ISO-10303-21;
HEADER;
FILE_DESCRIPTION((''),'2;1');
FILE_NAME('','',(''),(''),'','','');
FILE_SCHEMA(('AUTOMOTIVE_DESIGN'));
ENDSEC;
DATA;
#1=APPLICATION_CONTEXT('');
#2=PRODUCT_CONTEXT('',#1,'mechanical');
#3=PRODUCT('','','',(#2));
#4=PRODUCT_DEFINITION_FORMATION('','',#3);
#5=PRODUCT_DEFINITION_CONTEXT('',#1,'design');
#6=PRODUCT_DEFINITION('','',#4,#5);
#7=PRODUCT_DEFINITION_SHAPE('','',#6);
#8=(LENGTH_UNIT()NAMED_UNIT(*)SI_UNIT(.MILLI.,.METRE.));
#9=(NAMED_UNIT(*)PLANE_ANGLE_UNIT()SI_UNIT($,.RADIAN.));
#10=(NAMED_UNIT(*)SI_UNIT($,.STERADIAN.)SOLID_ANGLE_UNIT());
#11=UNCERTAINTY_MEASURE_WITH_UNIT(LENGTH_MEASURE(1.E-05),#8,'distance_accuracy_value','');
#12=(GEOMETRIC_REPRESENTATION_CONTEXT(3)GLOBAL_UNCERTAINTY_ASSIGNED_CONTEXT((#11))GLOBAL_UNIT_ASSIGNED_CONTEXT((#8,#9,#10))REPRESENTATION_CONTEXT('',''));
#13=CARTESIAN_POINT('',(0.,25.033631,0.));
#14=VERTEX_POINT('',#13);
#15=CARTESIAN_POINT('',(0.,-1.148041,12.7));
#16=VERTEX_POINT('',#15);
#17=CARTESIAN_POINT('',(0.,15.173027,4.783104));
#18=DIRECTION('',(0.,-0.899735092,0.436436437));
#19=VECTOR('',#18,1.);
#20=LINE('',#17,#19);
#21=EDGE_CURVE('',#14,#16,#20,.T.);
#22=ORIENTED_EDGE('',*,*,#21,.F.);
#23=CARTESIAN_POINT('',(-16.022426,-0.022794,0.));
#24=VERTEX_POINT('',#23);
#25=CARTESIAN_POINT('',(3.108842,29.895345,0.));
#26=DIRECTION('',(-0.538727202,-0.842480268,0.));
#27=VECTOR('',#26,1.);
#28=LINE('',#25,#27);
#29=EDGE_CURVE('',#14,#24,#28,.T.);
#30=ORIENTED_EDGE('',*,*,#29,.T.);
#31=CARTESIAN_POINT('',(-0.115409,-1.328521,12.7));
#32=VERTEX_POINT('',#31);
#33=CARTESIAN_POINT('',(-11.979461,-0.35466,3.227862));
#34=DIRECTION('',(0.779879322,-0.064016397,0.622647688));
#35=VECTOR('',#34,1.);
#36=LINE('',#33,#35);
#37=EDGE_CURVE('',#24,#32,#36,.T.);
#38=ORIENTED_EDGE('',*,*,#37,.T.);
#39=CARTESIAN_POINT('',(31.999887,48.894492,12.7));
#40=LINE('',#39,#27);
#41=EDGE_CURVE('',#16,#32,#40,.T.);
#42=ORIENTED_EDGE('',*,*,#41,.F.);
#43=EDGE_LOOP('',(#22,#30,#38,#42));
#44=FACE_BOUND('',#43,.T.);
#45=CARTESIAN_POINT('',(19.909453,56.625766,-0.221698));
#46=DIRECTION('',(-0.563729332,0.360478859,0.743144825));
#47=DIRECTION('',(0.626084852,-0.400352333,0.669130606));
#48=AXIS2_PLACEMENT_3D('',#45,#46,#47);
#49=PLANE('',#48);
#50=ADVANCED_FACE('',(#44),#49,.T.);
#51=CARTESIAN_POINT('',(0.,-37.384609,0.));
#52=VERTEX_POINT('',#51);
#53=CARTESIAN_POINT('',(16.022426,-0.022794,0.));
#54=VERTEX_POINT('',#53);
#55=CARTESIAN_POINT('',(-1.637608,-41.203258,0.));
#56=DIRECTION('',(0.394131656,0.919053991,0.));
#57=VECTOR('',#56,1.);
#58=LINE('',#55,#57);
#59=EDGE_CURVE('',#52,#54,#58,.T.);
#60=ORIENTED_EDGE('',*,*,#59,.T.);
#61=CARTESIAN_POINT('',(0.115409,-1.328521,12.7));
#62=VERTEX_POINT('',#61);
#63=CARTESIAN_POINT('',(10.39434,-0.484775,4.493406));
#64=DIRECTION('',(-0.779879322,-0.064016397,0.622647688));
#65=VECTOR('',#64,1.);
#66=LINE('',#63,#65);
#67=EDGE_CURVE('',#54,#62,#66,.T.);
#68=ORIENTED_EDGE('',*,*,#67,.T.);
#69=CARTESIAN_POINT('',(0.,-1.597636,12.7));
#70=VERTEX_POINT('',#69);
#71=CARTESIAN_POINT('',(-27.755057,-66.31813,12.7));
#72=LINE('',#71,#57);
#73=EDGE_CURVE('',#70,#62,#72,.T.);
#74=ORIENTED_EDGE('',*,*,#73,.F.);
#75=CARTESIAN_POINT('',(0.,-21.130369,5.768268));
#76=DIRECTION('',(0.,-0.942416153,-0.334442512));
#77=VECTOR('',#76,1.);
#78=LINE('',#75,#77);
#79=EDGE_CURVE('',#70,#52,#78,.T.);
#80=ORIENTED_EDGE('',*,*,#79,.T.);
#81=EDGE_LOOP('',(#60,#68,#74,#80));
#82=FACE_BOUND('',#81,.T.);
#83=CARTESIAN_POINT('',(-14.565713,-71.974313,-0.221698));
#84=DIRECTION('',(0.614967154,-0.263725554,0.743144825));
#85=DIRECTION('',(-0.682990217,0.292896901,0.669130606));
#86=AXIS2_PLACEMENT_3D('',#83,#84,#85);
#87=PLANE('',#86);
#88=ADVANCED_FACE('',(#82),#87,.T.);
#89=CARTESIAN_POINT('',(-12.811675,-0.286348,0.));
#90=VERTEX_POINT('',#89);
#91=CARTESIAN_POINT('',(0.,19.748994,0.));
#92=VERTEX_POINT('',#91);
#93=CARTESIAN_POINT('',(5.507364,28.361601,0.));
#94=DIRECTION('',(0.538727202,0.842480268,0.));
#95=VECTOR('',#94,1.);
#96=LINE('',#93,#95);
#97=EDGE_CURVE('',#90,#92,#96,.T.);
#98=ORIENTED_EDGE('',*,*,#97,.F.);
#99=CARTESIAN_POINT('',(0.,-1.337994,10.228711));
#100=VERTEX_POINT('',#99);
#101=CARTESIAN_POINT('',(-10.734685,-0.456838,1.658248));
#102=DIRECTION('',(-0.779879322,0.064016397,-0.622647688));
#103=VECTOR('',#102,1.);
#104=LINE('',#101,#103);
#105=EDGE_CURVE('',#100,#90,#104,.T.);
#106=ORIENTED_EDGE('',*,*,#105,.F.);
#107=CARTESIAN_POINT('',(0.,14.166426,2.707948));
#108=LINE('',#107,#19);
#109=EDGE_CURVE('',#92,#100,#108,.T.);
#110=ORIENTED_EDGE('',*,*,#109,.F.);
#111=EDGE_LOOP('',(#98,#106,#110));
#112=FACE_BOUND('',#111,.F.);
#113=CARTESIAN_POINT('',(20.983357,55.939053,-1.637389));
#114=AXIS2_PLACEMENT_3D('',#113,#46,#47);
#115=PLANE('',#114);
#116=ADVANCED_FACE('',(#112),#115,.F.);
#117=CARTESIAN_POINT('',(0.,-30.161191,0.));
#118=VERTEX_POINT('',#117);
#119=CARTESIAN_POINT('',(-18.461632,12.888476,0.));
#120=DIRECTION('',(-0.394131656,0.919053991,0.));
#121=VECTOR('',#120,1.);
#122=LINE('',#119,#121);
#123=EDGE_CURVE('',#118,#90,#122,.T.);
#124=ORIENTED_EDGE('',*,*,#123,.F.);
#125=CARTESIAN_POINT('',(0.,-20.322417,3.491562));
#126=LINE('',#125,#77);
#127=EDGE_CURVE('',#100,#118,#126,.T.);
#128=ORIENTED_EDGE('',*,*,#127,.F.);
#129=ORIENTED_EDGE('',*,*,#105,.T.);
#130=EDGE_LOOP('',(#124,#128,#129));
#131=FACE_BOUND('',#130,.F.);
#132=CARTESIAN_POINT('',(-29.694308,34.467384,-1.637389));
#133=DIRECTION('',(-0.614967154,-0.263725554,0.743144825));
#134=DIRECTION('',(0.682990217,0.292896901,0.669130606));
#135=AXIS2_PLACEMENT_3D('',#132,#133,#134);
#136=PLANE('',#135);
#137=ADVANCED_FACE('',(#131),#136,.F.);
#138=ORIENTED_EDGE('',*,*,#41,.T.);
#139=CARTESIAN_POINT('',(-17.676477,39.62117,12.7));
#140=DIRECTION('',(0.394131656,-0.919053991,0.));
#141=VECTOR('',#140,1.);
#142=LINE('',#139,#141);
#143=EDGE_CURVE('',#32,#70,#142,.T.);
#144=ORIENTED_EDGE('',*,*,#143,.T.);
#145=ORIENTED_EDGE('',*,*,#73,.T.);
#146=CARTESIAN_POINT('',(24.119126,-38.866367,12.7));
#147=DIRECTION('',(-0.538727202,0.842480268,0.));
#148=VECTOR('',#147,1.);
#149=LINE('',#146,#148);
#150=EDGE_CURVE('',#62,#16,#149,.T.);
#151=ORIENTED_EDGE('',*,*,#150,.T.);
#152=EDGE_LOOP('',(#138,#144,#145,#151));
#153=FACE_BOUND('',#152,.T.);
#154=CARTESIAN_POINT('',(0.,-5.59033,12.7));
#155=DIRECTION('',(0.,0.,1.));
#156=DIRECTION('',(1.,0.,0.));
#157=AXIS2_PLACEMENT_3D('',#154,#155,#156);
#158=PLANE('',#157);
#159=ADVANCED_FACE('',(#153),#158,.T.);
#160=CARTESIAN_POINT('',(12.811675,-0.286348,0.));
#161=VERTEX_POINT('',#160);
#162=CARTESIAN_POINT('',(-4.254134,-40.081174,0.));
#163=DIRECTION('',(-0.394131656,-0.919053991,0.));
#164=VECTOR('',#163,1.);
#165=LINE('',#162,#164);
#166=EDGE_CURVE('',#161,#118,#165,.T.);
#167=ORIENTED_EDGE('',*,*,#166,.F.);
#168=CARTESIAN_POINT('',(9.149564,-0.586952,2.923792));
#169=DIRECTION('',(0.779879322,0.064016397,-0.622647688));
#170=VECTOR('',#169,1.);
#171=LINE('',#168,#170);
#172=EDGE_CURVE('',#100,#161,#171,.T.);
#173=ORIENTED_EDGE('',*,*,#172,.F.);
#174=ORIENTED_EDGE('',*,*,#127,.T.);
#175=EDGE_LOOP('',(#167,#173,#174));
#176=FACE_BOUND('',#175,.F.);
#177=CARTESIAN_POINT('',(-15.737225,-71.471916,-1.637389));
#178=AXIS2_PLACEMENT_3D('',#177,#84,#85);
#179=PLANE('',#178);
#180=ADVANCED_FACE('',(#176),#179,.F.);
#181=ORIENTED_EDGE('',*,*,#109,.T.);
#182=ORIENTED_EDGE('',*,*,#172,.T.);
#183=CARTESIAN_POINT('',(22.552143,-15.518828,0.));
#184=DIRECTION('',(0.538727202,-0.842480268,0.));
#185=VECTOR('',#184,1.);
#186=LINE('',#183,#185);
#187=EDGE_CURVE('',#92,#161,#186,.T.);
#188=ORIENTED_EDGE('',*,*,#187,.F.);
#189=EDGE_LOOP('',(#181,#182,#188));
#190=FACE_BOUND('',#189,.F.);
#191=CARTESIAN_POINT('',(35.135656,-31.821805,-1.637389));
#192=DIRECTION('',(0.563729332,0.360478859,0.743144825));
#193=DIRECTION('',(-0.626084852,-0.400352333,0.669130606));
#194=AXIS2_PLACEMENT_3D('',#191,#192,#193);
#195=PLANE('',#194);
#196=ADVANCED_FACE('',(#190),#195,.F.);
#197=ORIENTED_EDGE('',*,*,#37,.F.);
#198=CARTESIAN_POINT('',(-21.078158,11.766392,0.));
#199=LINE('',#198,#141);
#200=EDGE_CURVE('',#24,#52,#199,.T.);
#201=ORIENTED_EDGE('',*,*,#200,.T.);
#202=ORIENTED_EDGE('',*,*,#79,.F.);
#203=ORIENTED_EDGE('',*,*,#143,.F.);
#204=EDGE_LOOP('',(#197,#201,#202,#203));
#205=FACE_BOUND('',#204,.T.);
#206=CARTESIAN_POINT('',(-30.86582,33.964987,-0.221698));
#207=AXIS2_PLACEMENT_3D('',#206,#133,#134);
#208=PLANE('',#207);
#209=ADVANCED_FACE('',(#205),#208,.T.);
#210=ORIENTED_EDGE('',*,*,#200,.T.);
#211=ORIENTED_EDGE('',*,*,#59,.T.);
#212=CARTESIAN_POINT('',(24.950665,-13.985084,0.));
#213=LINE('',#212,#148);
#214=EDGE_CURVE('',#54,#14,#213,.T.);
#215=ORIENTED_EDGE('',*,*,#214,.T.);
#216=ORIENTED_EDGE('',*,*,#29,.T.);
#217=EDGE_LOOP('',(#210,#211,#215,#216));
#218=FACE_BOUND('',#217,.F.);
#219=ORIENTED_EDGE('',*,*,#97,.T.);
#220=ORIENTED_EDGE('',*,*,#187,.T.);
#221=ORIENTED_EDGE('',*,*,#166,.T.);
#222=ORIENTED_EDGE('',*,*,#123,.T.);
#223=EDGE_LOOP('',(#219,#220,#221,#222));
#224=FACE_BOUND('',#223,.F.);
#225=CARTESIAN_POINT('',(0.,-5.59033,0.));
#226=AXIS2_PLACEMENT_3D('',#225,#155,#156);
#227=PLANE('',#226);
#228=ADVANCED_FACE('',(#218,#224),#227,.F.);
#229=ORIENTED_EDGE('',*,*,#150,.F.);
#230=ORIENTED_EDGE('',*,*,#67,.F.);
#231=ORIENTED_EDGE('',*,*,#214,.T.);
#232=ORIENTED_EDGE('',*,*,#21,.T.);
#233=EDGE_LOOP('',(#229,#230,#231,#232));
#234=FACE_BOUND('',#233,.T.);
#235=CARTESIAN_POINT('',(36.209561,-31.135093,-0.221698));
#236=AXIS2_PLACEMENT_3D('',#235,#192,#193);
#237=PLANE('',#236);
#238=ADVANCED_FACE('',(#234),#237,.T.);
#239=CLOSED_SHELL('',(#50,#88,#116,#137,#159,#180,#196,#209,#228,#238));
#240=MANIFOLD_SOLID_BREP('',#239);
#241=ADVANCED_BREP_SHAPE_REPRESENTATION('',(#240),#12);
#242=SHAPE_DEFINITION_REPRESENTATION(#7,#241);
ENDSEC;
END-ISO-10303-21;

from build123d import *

# Parameters (mm, degrees)
F1_DEPTH    = 12.7
F2_T1_DEPTH = 115.269941864
F2_T3_DEPTH = 104.1696304448
F2_T5_DEPTH = 104.1696304448
F2_T7_DEPTH = 115.269941864
F3_T        = -1.905


# Not quite as in the source:
# - a fillet or chamfer that OpenCascade refuses, or shapes differently, is made with other operations: its cross-section is extruded or revolved along the edge and cut away or added


with BuildPart() as f1:
    # F0 (on Top) → F1 (new body)
    with BuildSketch(Plane.XY):
        Polygon((16.3001076085, 0), (0, 25.4906731501), (-16.3001076085, 0), (0, -38.0093268499), align=None)
    extrude(amount=F1_DEPTH)

    # F2: chamfer of 14.351 x 12.9216984397 on 4 edges, made by hand

    # F2_s2 → F2_t1 (cut)
    with BuildSketch(Plane(origin=(-28.3337655113, -66.0699536514, 0), x_dir=(0, 0, 1), z_dir=(0.3941316562, 0.9190539906, 0))):
        Polygon((-0.2216984397, 14.980678944), (12.7, 0.629678944), (12.7, 14.980678944), align=None)
    extrude(amount=F2_T1_DEPTH, mode=Mode.SUBTRACT)

    # F2_s4 → F2_t3 (cut)
    with BuildSketch(Plane(origin=(24.6401842719, -38.5331740573, 0), x_dir=(0, 0, 1), z_dir=(-0.5387272021, 0.8424802679, 0))):
        Polygon((-0.2216984397, 13.7325190245), (12.7, -0.6184809755), (12.7, 13.7325190245), align=None)
    extrude(amount=F2_T3_DEPTH, mode=Mode.SUBTRACT)

    # F2_s6 → F2_t5 (cut)
    with BuildSketch(Plane(origin=(31.4788292763, 49.227684105, 0), x_dir=(0, 0, 1), z_dir=(-0.5387272021, -0.8424802679, 0))):
        Polygon((-0.2216984397, 13.7325190245), (12.7, -0.6184809755), (12.7, 13.7325190245), align=None)
    extrude(amount=F2_T5_DEPTH, mode=Mode.SUBTRACT)

    # F2_s8 → F2_t7 (cut)
    with BuildSketch(Plane(origin=(-17.0977675905, 39.8693464092, 0), x_dir=(0, 0, 1), z_dir=(0.3941316562, -0.9190539906, 0))):
        Polygon((-0.2216984397, 14.980678944), (12.7, 0.629678944), (12.7, 14.980678944), align=None)
    extrude(amount=F2_T7_DEPTH, mode=Mode.SUBTRACT)

    # F3
    f3_openings = [f1.faces().sort_by_distance(p)[0] for p in [
        (0, -4.124591, 0),
    ]]
    offset(amount=F3_T, openings=f3_openings)


solid = f1.part
